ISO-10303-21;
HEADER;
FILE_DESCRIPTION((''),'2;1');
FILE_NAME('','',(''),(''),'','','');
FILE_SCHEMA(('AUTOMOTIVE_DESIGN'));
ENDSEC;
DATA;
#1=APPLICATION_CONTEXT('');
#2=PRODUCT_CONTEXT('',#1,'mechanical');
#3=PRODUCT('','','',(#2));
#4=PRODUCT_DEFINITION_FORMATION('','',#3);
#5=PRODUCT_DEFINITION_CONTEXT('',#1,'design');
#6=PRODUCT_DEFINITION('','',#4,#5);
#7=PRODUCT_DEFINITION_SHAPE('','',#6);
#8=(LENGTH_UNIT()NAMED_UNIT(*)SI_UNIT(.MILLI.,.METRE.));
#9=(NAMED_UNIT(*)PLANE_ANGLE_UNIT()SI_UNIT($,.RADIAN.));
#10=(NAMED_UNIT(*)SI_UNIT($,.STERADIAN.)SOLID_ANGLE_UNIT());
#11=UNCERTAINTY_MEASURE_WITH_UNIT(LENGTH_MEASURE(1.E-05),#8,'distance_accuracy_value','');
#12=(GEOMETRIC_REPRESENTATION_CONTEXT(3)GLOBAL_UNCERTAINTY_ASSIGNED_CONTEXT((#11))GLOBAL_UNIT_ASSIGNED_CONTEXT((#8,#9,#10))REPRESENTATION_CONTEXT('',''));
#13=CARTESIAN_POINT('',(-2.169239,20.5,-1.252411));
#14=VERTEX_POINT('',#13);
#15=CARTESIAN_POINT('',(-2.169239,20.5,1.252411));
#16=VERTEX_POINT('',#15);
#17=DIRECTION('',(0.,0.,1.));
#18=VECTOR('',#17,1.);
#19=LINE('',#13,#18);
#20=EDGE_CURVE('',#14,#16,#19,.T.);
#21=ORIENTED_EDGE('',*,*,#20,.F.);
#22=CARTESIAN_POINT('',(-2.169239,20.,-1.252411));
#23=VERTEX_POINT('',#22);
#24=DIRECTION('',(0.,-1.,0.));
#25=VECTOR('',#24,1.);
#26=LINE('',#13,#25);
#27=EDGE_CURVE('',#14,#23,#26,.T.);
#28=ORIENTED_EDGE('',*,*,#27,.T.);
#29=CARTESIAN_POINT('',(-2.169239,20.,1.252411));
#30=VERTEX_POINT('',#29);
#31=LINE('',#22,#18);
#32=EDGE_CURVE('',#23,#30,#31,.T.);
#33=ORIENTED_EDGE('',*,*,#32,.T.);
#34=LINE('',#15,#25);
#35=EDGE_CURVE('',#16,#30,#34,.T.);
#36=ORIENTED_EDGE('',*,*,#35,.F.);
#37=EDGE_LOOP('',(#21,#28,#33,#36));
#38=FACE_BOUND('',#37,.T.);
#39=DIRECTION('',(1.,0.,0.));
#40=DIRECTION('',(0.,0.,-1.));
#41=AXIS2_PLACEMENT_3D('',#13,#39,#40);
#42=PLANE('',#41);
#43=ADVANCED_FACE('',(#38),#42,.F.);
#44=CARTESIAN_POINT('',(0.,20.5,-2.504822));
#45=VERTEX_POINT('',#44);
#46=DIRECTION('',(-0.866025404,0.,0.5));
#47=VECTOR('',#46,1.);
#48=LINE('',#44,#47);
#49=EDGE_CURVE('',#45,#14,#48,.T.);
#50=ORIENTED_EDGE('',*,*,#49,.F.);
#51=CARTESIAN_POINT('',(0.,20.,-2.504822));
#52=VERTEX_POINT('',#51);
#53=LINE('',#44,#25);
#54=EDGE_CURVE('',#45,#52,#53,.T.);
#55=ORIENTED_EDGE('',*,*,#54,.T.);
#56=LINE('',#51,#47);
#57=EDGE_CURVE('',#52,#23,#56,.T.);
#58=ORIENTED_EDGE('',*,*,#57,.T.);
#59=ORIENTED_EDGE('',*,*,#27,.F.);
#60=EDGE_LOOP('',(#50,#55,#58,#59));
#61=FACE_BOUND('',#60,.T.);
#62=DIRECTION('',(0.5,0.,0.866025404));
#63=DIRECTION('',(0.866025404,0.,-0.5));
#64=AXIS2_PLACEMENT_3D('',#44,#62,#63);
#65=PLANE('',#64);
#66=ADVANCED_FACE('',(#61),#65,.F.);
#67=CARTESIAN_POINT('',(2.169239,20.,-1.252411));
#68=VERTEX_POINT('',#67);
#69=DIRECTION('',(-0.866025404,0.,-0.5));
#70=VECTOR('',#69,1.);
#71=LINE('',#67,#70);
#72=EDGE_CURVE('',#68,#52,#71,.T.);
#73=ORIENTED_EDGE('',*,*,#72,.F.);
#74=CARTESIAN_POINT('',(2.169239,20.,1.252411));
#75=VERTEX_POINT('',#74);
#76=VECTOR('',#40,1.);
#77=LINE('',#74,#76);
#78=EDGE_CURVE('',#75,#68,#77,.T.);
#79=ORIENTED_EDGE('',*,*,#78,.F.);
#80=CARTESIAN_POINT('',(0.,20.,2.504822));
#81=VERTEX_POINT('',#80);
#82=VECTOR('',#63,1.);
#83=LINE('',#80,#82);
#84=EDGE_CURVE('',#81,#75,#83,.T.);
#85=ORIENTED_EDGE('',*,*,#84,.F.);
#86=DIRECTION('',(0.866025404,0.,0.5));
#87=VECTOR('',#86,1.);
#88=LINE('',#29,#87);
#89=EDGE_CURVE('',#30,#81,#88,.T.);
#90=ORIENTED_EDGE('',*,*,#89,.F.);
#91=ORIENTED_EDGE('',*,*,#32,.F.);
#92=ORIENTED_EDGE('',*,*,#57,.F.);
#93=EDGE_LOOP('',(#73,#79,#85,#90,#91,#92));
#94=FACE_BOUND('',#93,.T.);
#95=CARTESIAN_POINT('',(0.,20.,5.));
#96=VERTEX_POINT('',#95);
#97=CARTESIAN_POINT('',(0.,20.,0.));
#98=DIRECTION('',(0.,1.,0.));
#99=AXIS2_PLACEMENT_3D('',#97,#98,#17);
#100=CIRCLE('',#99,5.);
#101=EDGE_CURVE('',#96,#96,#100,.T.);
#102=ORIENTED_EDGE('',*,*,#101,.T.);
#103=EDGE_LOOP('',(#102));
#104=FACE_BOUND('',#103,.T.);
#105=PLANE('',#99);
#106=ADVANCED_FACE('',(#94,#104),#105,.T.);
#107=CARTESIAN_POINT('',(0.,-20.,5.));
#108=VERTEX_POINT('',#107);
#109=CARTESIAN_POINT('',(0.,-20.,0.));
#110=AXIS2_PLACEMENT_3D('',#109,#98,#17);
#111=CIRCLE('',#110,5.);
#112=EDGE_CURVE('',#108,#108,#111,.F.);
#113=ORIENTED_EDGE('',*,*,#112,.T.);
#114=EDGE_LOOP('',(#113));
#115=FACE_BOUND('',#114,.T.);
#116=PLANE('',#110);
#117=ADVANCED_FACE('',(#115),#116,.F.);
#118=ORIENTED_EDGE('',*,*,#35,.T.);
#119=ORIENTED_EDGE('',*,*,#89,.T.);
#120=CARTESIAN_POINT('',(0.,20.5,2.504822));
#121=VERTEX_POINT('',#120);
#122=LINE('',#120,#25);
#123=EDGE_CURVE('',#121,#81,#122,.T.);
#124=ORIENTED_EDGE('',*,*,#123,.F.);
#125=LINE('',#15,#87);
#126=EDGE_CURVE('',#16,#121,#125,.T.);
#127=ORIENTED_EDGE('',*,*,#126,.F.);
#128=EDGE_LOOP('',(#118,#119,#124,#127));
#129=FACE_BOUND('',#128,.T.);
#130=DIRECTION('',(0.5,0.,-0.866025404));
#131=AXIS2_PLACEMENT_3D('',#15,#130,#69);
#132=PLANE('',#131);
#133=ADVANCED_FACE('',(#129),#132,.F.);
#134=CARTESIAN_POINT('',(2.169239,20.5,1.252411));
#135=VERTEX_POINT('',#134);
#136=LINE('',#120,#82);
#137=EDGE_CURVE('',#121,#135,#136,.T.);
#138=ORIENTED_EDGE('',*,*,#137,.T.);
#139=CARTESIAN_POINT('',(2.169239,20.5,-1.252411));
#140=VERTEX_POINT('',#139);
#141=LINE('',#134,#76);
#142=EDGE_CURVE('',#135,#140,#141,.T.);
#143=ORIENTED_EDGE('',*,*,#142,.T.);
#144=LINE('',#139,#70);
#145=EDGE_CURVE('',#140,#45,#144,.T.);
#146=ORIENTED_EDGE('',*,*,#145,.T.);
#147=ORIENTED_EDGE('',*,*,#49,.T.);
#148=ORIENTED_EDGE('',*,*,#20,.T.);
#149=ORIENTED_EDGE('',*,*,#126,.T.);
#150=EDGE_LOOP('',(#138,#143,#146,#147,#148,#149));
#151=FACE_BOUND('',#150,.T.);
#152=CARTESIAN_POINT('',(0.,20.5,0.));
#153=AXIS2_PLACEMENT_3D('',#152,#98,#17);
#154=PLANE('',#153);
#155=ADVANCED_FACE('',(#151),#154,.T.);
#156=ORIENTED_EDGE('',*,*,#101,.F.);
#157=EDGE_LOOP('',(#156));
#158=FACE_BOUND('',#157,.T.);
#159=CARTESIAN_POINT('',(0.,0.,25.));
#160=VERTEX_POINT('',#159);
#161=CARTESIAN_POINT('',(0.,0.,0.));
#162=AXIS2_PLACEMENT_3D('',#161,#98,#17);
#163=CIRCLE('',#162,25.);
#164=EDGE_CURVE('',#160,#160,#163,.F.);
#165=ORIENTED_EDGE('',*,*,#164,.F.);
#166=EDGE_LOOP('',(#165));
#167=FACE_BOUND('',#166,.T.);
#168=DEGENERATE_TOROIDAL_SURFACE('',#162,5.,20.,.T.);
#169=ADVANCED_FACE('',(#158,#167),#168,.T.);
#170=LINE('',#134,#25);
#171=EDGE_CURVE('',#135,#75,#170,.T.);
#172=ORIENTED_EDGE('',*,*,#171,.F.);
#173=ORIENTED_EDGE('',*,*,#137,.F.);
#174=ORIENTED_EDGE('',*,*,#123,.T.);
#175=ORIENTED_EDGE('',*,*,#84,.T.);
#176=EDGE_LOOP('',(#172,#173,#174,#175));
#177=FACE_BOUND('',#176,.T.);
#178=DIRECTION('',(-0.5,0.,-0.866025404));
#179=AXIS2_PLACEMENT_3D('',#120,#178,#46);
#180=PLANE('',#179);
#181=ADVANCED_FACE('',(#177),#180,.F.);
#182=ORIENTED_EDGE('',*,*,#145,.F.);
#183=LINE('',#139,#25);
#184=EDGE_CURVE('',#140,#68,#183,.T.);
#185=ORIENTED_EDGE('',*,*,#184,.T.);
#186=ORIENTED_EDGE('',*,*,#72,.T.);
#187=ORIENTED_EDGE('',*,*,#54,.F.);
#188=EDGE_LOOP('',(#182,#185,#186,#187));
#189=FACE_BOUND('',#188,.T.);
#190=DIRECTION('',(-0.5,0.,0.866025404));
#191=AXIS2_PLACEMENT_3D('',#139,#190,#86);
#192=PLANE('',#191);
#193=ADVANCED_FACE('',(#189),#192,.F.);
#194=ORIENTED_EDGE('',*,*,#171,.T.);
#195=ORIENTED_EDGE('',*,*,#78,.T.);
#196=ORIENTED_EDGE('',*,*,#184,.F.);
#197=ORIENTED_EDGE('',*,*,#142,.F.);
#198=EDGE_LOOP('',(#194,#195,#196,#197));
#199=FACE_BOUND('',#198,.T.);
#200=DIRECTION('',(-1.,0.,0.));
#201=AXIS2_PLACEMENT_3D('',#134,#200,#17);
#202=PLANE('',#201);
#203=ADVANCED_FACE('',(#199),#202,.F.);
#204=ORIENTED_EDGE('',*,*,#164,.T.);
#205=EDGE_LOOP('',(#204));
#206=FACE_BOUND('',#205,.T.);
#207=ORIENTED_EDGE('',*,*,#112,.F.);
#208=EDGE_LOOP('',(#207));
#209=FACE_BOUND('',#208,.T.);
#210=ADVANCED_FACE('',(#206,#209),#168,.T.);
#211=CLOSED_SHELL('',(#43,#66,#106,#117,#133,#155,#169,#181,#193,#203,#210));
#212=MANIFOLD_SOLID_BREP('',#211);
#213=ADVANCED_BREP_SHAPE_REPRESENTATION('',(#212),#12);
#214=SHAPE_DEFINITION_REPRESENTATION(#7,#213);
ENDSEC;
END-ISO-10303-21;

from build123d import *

# Parameters (mm, degrees)
SKETCH2_R           = 25
BOSS_EXTRUDE5_DEPTH = 20
FILLET8_R           = 20
BOSS_EXTRUDE6_DEPTH = 0.5


with BuildPart() as part:
    # Sketch2 → Boss-Extrude5 (new, symmetric)
    with BuildSketch(Plane(origin=(0, 0, 0), x_dir=(1, 0, 0), z_dir=(0, 1, 0))):
        with Locations(Location((0, 0, 0), (0, 0, 270))):
            Circle(SKETCH2_R)
    extrude(amount=BOSS_EXTRUDE5_DEPTH, both=True)

    # Fillet8
    fillet8_edges = [part.edges().sort_by_distance(p)[0] for p in [
        (0, -20, -25),
        (0, 20, -25),
    ]]
    fillet(fillet8_edges, radius=FILLET8_R - 0.0001)  # a hair under: the kernel refuses the full size

    # Sketch3 → Boss-Extrude6 (add)
    with BuildSketch(Plane(origin=(0, 20, 0), x_dir=(1, 0, 0), z_dir=(0, 1, 0))):
        Polygon((0, 2.504821992), (-2.169239477, 1.252410996), (-2.169239477, -1.252410996), (0, -2.504821992), (2.169239477, -1.252410996), (2.169239477, 1.252410996), align=None)
    extrude(amount=BOSS_EXTRUDE6_DEPTH)


solid = part.part
